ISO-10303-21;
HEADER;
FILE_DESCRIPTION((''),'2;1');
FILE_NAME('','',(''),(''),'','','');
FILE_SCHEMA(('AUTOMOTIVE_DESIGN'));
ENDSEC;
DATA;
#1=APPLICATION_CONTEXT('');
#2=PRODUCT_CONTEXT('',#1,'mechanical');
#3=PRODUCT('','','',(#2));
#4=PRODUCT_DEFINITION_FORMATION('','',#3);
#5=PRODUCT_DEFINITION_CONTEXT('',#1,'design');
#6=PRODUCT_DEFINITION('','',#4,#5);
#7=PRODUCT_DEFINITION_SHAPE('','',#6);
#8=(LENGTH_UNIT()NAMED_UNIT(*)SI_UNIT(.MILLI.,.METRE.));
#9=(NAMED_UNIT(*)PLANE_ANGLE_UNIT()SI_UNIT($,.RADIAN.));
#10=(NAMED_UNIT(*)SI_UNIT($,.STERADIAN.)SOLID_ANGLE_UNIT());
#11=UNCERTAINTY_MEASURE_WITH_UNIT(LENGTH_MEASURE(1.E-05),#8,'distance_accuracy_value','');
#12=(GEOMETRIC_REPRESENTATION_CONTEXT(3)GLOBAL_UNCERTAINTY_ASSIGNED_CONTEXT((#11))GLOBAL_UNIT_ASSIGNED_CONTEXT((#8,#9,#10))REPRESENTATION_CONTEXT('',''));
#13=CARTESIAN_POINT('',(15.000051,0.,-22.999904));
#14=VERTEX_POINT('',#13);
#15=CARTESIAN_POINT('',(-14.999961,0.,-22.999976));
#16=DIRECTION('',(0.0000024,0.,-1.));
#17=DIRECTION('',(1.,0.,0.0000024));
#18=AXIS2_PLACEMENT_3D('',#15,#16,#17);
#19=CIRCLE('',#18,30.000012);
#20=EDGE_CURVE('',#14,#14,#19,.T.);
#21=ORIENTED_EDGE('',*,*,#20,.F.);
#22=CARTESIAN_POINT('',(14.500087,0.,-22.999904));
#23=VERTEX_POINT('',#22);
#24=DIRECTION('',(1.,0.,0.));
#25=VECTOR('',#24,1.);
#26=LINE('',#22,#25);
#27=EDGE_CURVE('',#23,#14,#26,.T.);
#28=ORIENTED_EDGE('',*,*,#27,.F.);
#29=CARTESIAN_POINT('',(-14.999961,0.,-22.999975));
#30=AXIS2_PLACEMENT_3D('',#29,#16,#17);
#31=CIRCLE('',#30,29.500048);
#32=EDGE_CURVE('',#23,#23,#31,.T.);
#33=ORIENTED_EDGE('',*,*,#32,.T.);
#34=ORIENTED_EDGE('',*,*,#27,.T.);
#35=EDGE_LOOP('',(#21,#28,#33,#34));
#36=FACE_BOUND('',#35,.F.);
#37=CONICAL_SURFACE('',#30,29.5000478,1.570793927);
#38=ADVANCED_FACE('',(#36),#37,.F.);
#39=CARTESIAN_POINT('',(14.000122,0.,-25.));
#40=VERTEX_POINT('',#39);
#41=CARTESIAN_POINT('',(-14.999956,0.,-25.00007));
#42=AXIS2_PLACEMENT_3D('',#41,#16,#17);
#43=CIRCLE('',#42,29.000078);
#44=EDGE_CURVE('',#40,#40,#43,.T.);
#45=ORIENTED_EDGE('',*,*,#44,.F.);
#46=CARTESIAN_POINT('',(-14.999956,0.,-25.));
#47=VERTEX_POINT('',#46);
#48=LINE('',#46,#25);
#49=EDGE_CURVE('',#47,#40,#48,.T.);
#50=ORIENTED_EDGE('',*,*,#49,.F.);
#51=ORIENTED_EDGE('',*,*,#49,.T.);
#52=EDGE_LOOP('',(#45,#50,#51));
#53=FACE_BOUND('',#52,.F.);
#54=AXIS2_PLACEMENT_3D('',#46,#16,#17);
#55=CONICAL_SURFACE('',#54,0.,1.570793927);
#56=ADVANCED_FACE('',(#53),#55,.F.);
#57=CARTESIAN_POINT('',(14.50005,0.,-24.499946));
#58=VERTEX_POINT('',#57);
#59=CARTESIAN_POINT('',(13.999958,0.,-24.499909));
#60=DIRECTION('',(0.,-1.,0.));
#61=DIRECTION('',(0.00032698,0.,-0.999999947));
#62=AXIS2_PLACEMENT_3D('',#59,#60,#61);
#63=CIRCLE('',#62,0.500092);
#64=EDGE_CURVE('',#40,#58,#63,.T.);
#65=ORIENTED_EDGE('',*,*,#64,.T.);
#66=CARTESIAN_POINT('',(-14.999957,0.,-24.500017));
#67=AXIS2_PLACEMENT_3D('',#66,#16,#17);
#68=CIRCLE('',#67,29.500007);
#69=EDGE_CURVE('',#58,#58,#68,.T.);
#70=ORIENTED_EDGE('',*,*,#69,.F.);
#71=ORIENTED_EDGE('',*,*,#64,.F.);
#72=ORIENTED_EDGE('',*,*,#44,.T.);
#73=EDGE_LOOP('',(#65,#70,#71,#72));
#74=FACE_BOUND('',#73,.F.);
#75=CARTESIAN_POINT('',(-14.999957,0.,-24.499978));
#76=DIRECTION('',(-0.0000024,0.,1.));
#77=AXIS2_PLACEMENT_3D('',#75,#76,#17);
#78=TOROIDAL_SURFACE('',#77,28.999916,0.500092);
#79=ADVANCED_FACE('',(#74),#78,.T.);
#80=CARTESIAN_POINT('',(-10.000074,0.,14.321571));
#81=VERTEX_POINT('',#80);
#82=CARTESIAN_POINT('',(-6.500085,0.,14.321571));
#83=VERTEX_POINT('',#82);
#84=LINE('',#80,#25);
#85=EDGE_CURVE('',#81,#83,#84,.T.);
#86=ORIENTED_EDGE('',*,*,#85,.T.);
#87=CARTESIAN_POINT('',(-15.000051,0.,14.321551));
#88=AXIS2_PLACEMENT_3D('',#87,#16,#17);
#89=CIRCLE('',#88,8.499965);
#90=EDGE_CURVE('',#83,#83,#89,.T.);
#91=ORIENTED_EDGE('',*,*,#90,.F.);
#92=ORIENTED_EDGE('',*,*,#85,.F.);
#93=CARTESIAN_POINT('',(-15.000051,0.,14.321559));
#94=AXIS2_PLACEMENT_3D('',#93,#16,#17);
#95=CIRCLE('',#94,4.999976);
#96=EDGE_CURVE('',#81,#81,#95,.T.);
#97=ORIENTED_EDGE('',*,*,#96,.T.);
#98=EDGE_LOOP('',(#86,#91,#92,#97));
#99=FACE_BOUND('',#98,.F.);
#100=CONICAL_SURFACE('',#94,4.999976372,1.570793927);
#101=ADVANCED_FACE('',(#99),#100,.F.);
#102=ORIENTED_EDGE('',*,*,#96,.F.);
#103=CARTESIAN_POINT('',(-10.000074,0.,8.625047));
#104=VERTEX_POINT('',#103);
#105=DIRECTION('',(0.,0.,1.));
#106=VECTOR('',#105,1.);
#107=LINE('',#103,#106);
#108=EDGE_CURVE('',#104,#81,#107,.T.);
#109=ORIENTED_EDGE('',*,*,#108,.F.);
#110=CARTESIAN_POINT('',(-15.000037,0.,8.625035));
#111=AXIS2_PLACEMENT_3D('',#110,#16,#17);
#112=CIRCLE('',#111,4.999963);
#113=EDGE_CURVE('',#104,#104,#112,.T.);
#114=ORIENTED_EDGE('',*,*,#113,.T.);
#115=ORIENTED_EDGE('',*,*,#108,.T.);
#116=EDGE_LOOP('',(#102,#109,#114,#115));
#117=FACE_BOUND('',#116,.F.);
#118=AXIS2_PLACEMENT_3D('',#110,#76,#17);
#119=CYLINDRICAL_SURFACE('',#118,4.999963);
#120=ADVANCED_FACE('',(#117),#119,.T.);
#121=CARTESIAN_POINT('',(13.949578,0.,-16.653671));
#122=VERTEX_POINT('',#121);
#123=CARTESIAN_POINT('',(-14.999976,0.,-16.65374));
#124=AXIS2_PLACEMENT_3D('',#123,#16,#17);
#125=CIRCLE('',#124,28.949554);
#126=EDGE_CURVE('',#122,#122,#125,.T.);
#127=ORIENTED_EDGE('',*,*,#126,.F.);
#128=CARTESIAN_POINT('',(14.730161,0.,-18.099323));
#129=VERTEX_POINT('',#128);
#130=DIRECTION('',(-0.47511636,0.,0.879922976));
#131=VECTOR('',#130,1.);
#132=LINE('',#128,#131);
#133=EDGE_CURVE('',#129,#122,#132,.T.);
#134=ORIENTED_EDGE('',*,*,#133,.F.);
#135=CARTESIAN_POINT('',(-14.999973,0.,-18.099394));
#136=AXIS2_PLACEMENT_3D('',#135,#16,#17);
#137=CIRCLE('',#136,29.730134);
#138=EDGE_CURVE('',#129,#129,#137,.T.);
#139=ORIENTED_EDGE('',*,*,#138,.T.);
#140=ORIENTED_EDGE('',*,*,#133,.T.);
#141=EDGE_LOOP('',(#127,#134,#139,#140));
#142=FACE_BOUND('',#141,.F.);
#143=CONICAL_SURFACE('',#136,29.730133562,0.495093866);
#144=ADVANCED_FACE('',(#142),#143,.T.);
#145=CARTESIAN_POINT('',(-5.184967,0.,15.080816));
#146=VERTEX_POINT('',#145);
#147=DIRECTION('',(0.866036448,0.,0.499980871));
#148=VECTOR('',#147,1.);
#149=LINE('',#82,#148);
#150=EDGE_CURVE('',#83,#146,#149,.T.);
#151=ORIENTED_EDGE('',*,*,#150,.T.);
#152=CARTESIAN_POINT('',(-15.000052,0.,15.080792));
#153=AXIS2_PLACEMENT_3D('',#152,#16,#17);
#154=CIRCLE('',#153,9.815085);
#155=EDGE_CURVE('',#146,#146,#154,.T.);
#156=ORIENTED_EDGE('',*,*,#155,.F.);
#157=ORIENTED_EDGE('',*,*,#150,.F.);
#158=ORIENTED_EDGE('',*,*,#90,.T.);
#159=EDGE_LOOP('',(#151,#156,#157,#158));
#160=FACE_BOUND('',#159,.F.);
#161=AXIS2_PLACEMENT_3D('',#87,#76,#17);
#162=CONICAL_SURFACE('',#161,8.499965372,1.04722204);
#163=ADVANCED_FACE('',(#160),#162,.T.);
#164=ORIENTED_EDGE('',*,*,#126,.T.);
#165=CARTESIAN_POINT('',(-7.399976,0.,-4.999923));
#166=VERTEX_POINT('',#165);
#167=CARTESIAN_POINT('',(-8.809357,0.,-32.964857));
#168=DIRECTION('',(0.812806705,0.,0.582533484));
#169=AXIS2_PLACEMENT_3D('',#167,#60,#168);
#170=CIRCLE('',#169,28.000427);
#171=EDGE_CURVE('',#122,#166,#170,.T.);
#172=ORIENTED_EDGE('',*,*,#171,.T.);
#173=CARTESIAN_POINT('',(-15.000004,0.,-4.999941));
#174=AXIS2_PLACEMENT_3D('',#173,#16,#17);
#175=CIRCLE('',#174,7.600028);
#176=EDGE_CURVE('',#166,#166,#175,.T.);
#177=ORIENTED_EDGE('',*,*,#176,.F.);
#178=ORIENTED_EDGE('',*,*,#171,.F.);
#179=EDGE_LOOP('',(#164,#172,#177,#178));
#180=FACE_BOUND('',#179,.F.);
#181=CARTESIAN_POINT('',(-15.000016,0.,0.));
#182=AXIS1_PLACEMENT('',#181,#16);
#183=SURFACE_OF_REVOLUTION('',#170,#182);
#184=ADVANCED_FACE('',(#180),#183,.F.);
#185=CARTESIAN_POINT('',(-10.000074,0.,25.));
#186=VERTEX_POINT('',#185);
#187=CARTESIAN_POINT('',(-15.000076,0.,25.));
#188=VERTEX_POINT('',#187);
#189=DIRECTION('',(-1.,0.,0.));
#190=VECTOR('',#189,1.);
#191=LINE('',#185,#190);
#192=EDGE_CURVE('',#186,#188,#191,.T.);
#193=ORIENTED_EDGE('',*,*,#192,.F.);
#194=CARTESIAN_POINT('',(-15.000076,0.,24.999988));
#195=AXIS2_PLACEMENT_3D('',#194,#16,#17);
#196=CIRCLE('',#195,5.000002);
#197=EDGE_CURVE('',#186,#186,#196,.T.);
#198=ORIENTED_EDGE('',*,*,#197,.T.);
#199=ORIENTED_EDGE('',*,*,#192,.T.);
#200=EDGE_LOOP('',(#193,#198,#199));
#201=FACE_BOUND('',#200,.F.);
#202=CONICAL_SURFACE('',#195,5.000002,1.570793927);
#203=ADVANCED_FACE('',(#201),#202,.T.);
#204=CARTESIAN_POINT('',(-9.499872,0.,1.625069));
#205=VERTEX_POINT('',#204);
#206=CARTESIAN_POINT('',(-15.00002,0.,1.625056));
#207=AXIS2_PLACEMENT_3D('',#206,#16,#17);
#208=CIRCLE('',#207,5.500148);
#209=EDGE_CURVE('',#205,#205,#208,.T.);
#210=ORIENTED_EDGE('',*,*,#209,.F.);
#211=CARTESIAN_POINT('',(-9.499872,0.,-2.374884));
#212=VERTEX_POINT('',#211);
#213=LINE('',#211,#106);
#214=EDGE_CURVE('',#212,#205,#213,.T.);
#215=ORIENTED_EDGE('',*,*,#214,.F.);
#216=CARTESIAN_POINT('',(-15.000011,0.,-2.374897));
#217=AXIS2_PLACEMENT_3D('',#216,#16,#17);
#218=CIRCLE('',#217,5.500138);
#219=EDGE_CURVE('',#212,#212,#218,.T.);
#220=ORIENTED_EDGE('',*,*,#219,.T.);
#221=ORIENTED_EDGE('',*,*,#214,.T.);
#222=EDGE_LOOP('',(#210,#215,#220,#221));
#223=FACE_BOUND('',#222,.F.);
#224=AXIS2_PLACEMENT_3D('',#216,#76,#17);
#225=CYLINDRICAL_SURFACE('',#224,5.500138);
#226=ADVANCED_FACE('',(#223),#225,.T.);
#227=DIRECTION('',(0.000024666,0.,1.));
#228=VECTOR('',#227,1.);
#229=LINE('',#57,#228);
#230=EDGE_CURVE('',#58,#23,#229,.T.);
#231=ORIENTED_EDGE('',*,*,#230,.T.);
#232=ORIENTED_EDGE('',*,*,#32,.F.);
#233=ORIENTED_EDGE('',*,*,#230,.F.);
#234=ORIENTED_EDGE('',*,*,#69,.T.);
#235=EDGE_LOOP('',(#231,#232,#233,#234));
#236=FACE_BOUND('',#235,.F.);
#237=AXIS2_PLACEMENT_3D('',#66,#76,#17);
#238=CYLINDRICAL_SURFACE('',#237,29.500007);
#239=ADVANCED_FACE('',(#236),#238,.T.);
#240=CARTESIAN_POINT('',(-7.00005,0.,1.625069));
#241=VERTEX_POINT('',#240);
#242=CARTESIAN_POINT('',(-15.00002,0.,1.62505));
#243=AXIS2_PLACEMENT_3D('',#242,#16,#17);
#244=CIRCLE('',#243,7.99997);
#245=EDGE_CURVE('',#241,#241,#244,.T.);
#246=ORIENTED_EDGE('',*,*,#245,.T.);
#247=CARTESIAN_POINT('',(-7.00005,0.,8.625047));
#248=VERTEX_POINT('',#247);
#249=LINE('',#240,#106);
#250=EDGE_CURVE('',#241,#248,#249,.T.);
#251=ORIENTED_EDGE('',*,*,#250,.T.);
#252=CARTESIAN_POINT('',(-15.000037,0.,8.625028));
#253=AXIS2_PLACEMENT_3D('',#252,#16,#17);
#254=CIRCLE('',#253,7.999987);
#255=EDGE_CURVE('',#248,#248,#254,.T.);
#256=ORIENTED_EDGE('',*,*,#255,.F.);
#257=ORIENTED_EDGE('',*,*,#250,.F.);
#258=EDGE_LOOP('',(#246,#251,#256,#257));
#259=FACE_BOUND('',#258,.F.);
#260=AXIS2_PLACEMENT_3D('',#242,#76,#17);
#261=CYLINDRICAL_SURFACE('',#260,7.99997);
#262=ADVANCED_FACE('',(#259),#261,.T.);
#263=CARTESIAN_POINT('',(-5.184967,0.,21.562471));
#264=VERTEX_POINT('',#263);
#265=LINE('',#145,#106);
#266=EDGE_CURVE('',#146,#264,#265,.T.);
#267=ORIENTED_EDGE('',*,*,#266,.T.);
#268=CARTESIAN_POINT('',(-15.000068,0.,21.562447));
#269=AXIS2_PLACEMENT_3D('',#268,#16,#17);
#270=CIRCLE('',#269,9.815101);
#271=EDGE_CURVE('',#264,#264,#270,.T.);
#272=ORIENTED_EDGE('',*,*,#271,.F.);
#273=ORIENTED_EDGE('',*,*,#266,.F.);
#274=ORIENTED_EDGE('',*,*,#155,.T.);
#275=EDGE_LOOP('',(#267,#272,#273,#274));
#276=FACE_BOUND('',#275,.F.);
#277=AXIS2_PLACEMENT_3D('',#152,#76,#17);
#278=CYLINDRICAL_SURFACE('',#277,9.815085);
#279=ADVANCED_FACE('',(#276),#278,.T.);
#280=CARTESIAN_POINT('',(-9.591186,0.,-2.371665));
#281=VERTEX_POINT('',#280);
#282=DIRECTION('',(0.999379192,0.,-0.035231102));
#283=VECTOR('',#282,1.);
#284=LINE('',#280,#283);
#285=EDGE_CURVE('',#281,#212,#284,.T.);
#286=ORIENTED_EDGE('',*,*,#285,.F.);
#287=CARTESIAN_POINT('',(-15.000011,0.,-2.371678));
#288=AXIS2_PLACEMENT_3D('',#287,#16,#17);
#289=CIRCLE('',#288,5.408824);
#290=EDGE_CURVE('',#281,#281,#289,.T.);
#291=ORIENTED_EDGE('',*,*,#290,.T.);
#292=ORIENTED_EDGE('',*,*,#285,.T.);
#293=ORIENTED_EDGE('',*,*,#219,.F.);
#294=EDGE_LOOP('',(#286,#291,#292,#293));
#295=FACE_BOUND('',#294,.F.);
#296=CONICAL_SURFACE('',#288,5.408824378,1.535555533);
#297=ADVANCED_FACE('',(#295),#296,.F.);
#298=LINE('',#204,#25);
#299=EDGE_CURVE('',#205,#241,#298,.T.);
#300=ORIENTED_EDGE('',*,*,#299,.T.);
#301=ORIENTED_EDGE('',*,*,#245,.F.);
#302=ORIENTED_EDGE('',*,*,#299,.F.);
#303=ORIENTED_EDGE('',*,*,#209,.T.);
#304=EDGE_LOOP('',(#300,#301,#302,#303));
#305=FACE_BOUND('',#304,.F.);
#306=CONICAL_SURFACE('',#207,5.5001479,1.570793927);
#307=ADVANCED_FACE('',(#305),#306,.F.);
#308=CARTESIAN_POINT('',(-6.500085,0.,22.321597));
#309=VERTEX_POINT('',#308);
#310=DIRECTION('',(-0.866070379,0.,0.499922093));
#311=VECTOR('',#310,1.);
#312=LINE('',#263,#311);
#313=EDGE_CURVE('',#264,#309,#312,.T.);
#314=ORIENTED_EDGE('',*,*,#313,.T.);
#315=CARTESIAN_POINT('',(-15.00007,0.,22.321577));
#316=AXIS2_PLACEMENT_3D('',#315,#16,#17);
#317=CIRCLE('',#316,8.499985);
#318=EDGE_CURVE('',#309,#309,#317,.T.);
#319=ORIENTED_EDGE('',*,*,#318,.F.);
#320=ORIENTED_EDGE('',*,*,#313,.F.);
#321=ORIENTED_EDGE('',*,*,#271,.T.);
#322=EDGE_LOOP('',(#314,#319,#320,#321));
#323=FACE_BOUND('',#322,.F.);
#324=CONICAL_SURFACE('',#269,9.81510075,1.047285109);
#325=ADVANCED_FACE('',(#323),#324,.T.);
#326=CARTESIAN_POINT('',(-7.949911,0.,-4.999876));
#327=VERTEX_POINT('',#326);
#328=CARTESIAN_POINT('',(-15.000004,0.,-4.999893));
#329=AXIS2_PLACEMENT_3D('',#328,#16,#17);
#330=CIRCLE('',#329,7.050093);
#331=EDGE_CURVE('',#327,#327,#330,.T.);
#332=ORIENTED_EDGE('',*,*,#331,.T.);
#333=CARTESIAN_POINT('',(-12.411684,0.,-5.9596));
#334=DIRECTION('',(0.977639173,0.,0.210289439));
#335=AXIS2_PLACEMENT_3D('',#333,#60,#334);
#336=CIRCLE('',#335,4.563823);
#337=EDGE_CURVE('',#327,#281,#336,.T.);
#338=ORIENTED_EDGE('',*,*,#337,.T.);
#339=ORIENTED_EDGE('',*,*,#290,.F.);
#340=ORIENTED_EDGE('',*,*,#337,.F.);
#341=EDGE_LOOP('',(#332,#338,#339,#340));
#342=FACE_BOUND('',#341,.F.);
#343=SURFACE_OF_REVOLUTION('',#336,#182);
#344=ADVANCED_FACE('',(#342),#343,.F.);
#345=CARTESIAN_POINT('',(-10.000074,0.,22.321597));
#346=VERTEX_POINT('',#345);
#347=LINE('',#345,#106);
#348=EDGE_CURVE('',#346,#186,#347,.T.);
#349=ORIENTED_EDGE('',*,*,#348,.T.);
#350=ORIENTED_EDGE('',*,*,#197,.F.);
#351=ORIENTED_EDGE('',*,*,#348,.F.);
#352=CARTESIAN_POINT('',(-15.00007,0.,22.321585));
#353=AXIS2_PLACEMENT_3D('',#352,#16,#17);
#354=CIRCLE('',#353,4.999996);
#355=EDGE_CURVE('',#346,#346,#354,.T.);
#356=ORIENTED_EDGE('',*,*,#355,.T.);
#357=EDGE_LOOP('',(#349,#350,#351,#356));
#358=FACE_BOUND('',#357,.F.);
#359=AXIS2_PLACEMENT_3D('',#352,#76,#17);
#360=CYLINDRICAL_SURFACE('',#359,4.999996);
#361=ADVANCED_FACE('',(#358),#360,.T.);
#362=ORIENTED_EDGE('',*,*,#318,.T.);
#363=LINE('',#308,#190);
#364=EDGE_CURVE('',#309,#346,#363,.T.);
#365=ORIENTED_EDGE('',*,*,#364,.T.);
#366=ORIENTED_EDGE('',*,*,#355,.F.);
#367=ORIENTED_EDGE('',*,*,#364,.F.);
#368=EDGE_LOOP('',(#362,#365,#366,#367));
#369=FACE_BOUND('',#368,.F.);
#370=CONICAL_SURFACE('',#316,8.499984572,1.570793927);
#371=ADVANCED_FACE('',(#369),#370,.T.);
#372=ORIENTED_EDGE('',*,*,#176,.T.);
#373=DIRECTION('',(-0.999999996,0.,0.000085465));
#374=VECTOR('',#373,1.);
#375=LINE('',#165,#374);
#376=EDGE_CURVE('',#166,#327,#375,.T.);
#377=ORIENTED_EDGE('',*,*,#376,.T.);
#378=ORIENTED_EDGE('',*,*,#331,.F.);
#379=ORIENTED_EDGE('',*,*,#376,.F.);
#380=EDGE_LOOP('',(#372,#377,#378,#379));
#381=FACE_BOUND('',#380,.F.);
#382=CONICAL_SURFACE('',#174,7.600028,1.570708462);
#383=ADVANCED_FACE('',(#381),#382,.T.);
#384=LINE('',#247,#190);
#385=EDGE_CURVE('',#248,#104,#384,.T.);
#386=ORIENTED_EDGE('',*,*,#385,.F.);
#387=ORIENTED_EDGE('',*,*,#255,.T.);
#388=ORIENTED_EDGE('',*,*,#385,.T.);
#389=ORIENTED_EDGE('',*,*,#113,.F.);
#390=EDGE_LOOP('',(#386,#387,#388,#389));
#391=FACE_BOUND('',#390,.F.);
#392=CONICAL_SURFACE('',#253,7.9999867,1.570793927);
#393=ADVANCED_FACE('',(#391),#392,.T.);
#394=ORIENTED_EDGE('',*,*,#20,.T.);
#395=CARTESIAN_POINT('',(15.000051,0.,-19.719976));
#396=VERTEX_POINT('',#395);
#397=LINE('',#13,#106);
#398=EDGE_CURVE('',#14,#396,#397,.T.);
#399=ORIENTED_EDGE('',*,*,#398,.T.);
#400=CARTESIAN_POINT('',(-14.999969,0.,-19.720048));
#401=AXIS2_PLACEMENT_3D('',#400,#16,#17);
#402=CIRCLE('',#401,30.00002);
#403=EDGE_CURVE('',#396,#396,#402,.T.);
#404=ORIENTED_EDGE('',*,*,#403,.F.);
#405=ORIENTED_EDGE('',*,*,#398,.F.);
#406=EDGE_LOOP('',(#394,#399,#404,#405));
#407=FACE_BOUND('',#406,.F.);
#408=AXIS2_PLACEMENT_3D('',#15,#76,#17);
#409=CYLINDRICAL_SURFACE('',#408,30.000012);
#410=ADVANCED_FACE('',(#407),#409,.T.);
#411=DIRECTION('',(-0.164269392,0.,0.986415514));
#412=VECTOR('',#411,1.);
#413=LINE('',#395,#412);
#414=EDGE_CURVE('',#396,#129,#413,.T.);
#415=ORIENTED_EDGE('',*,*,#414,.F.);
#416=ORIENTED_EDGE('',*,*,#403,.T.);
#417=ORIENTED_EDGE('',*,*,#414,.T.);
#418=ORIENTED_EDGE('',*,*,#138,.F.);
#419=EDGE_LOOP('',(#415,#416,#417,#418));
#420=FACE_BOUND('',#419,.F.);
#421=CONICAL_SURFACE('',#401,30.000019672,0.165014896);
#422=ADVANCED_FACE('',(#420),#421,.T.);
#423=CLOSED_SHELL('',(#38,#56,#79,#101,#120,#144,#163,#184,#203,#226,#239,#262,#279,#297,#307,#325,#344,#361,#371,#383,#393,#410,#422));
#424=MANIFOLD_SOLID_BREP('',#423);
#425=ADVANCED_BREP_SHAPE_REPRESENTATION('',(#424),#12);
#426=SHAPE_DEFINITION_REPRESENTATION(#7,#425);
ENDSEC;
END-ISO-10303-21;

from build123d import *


# Not quite as in the source:
# - ends of sketch curves that miss each other by under 0.0002 mm in the source are joined


with BuildPart() as f1:
    # F0 (on Front) → F1 (revolve)
    with BuildSketch(Plane.XZ):
        with BuildLine():
            Line((-7.3999762, -4.999923), (-7.9499112, -4.999876))
            ThreePointArc((-7.9499112, -4.999876), (-8.5406711809, -3.5422157753), (-9.5911861302, -2.3716649112))
            Line((-9.5911861302, -2.3716649112), (-9.4998722, -2.374884))
            Line((-9.4998722, -2.374884), (-9.4998722, 1.625069))
            Line((-9.4998722, 1.625069), (-7.0000502, 1.625069))
            Line((-7.0000502, 1.625069), (-7.0000502, 8.625047))
            Line((-7.0000502, 8.625047), (-10.0000742, 8.625047))
            Line((-10.0000742, 8.625047), (-10.0000742, 14.321571))
            Line((-10.0000742, 14.321571), (-6.5000852, 14.321571))
            Line((-6.5000852, 14.321571), (-5.1849672, 15.080816))
            Line((-5.1849672, 15.080816), (-5.1849672, 21.562471))
            Line((-5.1849672, 21.562471), (-6.5000852, 22.321597))
            Line((-6.5000852, 22.321597), (-10.0000742, 22.321597))
            Line((-10.0000742, 22.321597), (-10.0000742, 25))
            Line((-10.0000742, 25), (-15.0000762, 25))
            Line((-15.0000762, 25), (-15.0000697718, 22.3215925))
            Line((-15.0000697718, 22.3215925), (-15.0000505717, 14.3215729999))
            Line((-15.0000505717, 14.3215729999), (-14.9999562, -25))
            Line((-14.9999562, -25), (4.9999238, -25))
            Line((4.9999238, -25), (14.0001218, -25))
            ThreePointArc((14.0001218, -25), (14.3536028976, -24.8535000977), (14.5000498, -24.499946))
            Line((14.5000498, -24.499946), (14.5000868, -22.999904))
            Line((14.5000868, -22.999904), (15.0000508, -22.999904))
            Line((15.0000508, -22.999904), (15.0000508, -19.719976))
            Line((15.0000508, -19.719976), (14.7301608, -18.099323))
            Line((14.7301608, -18.099323), (13.9495778, -16.653671))
            ThreePointArc((13.9495778, -16.653671), (4.6062496949, -8.3875220734), (-7.3999762, -4.999923))
        make_face()
    revolve(axis=Axis((-15.0000162, 0, 0), (2.4e-06, 0, -1)))


solid = f1.part
